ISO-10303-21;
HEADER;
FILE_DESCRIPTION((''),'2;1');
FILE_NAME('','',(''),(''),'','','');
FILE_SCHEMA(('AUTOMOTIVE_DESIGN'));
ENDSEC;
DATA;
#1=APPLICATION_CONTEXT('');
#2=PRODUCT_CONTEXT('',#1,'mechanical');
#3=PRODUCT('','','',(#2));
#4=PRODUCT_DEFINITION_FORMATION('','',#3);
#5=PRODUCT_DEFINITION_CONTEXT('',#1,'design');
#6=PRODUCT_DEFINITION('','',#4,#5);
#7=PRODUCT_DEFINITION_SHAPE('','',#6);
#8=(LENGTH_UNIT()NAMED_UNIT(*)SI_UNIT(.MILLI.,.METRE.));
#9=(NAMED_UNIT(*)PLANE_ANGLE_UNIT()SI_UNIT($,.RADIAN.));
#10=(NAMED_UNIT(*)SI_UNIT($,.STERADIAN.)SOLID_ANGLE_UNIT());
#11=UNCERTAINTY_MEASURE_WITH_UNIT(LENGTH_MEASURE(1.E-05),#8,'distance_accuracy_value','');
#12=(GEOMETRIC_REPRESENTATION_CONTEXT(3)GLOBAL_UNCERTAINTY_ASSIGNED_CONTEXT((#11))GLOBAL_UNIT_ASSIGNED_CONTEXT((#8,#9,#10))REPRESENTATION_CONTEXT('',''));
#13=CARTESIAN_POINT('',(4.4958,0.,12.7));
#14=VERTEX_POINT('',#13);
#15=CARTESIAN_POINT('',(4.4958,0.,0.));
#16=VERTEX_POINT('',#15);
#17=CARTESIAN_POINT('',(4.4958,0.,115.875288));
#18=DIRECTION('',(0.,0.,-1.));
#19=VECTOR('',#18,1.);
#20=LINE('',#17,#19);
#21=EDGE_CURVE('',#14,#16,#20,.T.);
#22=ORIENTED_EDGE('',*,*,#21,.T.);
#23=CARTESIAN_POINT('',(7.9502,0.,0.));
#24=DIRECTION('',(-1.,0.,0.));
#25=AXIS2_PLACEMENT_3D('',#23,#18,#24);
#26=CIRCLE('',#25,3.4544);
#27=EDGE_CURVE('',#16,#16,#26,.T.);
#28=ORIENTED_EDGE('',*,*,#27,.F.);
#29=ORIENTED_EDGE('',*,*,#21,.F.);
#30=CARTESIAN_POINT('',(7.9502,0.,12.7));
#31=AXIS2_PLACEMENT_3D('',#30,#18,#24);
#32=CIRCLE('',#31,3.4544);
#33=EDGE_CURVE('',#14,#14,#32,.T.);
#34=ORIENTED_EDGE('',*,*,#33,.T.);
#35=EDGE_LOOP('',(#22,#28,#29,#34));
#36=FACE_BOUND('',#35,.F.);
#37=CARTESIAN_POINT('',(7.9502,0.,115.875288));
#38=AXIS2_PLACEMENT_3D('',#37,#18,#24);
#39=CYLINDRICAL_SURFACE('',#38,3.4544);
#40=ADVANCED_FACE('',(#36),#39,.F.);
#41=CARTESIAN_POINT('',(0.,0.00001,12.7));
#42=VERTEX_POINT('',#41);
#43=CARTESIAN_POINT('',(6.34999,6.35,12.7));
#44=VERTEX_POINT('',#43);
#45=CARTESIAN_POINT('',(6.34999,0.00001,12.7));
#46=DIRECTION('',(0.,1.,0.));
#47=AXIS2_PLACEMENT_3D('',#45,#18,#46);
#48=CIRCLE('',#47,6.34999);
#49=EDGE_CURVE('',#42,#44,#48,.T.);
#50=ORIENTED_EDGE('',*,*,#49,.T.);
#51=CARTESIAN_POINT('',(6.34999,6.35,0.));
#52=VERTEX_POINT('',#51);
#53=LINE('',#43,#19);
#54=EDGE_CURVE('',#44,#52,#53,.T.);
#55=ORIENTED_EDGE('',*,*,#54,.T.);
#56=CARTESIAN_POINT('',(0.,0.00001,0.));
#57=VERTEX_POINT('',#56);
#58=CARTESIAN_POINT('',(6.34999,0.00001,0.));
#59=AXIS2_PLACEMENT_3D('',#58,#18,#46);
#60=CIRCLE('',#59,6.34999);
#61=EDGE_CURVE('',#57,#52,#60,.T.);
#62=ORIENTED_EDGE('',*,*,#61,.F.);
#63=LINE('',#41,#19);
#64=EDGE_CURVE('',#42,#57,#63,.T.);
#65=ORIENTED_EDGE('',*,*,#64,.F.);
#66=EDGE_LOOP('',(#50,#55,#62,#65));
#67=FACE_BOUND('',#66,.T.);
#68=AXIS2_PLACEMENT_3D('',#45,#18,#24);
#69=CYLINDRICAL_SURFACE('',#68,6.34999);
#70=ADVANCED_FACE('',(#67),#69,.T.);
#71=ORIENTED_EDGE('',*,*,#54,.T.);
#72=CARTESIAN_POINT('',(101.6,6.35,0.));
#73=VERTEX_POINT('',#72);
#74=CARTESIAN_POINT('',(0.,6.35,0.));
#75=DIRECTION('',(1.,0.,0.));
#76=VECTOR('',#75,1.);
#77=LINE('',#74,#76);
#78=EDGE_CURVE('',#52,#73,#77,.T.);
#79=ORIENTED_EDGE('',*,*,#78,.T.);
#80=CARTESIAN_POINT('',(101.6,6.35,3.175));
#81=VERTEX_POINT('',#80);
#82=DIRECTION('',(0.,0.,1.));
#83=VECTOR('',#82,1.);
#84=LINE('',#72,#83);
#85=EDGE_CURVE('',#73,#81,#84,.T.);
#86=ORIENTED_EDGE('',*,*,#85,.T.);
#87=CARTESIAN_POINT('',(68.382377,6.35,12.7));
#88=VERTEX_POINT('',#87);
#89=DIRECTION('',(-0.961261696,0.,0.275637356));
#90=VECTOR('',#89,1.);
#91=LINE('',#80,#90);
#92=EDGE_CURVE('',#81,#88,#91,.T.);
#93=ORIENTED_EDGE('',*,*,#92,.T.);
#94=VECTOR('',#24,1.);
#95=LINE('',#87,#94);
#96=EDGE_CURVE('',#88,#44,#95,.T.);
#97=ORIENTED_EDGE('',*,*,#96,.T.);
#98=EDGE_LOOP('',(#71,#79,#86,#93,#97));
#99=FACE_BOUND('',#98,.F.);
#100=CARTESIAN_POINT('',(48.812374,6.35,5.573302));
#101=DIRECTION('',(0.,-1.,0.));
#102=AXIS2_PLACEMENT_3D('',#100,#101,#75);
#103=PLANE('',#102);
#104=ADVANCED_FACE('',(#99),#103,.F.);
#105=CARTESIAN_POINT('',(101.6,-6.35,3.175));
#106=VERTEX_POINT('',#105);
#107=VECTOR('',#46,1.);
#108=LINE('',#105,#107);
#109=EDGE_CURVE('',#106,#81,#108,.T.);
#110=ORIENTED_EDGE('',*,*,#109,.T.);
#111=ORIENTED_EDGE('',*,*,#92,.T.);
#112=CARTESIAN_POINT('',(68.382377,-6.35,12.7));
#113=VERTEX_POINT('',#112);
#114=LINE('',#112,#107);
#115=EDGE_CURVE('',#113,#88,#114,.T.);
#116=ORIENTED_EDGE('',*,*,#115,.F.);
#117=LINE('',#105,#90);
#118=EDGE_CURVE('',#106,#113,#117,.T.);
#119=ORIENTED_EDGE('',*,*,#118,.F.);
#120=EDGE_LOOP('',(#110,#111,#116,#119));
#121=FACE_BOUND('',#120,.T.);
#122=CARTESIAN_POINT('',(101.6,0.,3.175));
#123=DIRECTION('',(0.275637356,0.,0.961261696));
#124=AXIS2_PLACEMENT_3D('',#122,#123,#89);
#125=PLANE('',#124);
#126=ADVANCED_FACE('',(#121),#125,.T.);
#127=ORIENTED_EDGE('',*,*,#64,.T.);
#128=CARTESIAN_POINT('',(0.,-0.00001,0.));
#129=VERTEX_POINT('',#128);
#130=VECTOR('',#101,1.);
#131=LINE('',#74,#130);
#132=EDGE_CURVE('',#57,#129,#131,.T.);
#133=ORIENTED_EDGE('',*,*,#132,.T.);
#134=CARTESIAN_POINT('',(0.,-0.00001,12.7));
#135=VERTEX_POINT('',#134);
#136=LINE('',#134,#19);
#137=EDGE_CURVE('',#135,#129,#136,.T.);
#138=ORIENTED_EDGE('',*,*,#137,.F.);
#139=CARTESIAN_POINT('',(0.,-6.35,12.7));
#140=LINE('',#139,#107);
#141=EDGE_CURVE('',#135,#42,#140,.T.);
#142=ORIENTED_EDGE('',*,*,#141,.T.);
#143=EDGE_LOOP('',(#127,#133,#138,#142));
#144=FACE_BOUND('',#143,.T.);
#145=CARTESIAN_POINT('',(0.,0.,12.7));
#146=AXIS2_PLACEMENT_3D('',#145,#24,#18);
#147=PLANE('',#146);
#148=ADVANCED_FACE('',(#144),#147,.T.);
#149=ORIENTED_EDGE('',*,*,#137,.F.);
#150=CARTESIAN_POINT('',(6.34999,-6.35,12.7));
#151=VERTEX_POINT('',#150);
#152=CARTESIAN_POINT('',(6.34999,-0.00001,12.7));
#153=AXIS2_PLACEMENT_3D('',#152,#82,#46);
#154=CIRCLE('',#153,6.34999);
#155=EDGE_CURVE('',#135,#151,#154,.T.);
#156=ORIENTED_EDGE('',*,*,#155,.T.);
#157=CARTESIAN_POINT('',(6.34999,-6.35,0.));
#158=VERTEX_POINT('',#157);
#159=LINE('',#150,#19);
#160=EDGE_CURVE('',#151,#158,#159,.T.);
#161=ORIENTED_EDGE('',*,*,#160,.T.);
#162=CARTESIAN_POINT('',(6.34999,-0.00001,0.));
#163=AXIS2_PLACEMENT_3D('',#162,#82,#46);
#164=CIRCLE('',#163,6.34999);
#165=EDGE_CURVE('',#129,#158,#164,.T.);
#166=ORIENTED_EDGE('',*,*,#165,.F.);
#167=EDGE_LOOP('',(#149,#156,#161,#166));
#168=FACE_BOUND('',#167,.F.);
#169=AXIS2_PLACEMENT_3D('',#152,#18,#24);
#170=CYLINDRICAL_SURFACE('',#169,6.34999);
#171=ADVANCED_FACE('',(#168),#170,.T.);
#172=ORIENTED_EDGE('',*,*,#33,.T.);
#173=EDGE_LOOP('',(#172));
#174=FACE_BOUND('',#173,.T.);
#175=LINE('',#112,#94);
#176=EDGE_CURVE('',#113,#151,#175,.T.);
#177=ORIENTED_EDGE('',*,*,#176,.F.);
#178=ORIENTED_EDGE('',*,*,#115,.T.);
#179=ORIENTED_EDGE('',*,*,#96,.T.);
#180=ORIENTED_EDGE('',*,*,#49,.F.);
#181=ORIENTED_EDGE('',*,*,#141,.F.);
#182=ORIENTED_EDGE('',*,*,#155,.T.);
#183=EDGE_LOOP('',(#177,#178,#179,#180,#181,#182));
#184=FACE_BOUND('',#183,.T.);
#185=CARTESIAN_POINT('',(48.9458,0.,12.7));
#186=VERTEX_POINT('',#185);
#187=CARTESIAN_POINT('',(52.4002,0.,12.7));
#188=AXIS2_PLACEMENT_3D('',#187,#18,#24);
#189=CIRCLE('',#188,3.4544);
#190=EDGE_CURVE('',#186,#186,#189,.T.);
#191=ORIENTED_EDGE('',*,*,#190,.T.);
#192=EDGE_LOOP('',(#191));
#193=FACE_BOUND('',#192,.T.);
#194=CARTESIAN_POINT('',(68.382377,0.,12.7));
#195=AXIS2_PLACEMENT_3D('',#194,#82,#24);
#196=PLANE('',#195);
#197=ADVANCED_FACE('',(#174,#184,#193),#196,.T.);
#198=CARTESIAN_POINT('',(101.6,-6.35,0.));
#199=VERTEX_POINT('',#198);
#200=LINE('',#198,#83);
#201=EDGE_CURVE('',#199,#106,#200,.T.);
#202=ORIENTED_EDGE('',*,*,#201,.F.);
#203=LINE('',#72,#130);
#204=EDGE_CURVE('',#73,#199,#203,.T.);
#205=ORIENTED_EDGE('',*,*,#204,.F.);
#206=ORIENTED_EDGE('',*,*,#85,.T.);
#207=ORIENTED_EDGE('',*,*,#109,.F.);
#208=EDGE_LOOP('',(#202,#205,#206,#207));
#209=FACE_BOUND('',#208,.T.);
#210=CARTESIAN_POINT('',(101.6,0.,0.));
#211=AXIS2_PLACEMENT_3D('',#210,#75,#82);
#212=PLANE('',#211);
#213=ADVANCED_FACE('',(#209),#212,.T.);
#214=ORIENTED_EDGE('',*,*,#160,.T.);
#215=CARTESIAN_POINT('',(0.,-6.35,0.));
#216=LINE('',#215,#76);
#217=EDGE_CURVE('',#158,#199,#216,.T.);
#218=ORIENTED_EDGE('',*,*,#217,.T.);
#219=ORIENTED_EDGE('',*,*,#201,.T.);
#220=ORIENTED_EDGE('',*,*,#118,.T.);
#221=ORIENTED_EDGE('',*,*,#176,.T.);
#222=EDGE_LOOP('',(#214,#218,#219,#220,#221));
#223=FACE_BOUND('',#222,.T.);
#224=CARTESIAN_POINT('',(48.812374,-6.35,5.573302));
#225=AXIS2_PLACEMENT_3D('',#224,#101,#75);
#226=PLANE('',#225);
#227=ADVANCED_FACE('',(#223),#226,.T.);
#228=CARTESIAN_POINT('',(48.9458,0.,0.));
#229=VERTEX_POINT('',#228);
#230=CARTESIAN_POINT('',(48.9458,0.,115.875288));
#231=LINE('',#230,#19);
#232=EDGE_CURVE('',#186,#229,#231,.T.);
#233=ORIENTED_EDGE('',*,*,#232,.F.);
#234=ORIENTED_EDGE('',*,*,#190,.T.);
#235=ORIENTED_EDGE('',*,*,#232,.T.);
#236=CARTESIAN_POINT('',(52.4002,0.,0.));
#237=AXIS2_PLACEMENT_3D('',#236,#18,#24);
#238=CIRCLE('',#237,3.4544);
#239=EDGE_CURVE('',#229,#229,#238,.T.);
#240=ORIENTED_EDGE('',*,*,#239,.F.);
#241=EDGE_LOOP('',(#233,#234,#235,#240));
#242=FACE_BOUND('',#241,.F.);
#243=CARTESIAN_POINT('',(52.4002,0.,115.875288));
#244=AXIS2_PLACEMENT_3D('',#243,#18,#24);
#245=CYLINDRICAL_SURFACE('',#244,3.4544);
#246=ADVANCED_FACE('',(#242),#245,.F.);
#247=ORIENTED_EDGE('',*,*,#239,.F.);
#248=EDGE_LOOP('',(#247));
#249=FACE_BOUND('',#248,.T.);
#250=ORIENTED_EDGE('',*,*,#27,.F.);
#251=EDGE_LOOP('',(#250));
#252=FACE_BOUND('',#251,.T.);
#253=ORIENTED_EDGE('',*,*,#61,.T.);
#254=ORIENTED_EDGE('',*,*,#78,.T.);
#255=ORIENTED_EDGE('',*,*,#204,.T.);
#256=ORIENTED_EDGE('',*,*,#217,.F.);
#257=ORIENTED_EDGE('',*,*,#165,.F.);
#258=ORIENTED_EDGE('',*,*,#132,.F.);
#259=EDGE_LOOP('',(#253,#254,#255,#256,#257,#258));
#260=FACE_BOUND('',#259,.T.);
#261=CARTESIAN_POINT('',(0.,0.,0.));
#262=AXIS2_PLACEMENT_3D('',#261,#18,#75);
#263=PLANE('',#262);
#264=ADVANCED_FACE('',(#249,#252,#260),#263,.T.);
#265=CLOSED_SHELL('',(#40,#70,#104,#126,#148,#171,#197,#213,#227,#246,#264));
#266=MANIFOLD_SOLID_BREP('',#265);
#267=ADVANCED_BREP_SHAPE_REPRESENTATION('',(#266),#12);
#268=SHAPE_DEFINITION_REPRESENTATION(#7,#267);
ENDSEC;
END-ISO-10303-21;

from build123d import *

# Parameters (mm, degrees)
F1_DEPTH = 6.35
F3_R     = 6.34999
F4_D     = 6.9088


# Not quite as in the source:
# - a fillet or chamfer is up to 0.001 mm smaller than in the source, because OpenCascade refuses the exact size


with BuildPart() as f1:
    # F0 (on Front) → F1 (new body, symmetric)
    with BuildSketch(Plane.XZ):
        Polygon((0, 12.7), (0, 0), (101.6, 0), (101.6, 3.175), (68.3823774224, 12.7), align=None)
    extrude(amount=F1_DEPTH, both=True)

    # F3 (radius 6.35 in the source; OpenCascade refuses exactly that, so slightly less here)
    f3_edges = [f1.edges().sort_by_distance(p)[0] for p in [
        (0, -6.35, 6.35),
        (0, 6.35, 6.35),
    ]]
    fillet(f3_edges, radius=F3_R)

    # F4 (through all)
    with Locations(Plane.XY.offset(12.7)):
        with Locations((52.4002, 0), (7.9502, 0)):
            Hole(F4_D / 2)


solid = f1.part
